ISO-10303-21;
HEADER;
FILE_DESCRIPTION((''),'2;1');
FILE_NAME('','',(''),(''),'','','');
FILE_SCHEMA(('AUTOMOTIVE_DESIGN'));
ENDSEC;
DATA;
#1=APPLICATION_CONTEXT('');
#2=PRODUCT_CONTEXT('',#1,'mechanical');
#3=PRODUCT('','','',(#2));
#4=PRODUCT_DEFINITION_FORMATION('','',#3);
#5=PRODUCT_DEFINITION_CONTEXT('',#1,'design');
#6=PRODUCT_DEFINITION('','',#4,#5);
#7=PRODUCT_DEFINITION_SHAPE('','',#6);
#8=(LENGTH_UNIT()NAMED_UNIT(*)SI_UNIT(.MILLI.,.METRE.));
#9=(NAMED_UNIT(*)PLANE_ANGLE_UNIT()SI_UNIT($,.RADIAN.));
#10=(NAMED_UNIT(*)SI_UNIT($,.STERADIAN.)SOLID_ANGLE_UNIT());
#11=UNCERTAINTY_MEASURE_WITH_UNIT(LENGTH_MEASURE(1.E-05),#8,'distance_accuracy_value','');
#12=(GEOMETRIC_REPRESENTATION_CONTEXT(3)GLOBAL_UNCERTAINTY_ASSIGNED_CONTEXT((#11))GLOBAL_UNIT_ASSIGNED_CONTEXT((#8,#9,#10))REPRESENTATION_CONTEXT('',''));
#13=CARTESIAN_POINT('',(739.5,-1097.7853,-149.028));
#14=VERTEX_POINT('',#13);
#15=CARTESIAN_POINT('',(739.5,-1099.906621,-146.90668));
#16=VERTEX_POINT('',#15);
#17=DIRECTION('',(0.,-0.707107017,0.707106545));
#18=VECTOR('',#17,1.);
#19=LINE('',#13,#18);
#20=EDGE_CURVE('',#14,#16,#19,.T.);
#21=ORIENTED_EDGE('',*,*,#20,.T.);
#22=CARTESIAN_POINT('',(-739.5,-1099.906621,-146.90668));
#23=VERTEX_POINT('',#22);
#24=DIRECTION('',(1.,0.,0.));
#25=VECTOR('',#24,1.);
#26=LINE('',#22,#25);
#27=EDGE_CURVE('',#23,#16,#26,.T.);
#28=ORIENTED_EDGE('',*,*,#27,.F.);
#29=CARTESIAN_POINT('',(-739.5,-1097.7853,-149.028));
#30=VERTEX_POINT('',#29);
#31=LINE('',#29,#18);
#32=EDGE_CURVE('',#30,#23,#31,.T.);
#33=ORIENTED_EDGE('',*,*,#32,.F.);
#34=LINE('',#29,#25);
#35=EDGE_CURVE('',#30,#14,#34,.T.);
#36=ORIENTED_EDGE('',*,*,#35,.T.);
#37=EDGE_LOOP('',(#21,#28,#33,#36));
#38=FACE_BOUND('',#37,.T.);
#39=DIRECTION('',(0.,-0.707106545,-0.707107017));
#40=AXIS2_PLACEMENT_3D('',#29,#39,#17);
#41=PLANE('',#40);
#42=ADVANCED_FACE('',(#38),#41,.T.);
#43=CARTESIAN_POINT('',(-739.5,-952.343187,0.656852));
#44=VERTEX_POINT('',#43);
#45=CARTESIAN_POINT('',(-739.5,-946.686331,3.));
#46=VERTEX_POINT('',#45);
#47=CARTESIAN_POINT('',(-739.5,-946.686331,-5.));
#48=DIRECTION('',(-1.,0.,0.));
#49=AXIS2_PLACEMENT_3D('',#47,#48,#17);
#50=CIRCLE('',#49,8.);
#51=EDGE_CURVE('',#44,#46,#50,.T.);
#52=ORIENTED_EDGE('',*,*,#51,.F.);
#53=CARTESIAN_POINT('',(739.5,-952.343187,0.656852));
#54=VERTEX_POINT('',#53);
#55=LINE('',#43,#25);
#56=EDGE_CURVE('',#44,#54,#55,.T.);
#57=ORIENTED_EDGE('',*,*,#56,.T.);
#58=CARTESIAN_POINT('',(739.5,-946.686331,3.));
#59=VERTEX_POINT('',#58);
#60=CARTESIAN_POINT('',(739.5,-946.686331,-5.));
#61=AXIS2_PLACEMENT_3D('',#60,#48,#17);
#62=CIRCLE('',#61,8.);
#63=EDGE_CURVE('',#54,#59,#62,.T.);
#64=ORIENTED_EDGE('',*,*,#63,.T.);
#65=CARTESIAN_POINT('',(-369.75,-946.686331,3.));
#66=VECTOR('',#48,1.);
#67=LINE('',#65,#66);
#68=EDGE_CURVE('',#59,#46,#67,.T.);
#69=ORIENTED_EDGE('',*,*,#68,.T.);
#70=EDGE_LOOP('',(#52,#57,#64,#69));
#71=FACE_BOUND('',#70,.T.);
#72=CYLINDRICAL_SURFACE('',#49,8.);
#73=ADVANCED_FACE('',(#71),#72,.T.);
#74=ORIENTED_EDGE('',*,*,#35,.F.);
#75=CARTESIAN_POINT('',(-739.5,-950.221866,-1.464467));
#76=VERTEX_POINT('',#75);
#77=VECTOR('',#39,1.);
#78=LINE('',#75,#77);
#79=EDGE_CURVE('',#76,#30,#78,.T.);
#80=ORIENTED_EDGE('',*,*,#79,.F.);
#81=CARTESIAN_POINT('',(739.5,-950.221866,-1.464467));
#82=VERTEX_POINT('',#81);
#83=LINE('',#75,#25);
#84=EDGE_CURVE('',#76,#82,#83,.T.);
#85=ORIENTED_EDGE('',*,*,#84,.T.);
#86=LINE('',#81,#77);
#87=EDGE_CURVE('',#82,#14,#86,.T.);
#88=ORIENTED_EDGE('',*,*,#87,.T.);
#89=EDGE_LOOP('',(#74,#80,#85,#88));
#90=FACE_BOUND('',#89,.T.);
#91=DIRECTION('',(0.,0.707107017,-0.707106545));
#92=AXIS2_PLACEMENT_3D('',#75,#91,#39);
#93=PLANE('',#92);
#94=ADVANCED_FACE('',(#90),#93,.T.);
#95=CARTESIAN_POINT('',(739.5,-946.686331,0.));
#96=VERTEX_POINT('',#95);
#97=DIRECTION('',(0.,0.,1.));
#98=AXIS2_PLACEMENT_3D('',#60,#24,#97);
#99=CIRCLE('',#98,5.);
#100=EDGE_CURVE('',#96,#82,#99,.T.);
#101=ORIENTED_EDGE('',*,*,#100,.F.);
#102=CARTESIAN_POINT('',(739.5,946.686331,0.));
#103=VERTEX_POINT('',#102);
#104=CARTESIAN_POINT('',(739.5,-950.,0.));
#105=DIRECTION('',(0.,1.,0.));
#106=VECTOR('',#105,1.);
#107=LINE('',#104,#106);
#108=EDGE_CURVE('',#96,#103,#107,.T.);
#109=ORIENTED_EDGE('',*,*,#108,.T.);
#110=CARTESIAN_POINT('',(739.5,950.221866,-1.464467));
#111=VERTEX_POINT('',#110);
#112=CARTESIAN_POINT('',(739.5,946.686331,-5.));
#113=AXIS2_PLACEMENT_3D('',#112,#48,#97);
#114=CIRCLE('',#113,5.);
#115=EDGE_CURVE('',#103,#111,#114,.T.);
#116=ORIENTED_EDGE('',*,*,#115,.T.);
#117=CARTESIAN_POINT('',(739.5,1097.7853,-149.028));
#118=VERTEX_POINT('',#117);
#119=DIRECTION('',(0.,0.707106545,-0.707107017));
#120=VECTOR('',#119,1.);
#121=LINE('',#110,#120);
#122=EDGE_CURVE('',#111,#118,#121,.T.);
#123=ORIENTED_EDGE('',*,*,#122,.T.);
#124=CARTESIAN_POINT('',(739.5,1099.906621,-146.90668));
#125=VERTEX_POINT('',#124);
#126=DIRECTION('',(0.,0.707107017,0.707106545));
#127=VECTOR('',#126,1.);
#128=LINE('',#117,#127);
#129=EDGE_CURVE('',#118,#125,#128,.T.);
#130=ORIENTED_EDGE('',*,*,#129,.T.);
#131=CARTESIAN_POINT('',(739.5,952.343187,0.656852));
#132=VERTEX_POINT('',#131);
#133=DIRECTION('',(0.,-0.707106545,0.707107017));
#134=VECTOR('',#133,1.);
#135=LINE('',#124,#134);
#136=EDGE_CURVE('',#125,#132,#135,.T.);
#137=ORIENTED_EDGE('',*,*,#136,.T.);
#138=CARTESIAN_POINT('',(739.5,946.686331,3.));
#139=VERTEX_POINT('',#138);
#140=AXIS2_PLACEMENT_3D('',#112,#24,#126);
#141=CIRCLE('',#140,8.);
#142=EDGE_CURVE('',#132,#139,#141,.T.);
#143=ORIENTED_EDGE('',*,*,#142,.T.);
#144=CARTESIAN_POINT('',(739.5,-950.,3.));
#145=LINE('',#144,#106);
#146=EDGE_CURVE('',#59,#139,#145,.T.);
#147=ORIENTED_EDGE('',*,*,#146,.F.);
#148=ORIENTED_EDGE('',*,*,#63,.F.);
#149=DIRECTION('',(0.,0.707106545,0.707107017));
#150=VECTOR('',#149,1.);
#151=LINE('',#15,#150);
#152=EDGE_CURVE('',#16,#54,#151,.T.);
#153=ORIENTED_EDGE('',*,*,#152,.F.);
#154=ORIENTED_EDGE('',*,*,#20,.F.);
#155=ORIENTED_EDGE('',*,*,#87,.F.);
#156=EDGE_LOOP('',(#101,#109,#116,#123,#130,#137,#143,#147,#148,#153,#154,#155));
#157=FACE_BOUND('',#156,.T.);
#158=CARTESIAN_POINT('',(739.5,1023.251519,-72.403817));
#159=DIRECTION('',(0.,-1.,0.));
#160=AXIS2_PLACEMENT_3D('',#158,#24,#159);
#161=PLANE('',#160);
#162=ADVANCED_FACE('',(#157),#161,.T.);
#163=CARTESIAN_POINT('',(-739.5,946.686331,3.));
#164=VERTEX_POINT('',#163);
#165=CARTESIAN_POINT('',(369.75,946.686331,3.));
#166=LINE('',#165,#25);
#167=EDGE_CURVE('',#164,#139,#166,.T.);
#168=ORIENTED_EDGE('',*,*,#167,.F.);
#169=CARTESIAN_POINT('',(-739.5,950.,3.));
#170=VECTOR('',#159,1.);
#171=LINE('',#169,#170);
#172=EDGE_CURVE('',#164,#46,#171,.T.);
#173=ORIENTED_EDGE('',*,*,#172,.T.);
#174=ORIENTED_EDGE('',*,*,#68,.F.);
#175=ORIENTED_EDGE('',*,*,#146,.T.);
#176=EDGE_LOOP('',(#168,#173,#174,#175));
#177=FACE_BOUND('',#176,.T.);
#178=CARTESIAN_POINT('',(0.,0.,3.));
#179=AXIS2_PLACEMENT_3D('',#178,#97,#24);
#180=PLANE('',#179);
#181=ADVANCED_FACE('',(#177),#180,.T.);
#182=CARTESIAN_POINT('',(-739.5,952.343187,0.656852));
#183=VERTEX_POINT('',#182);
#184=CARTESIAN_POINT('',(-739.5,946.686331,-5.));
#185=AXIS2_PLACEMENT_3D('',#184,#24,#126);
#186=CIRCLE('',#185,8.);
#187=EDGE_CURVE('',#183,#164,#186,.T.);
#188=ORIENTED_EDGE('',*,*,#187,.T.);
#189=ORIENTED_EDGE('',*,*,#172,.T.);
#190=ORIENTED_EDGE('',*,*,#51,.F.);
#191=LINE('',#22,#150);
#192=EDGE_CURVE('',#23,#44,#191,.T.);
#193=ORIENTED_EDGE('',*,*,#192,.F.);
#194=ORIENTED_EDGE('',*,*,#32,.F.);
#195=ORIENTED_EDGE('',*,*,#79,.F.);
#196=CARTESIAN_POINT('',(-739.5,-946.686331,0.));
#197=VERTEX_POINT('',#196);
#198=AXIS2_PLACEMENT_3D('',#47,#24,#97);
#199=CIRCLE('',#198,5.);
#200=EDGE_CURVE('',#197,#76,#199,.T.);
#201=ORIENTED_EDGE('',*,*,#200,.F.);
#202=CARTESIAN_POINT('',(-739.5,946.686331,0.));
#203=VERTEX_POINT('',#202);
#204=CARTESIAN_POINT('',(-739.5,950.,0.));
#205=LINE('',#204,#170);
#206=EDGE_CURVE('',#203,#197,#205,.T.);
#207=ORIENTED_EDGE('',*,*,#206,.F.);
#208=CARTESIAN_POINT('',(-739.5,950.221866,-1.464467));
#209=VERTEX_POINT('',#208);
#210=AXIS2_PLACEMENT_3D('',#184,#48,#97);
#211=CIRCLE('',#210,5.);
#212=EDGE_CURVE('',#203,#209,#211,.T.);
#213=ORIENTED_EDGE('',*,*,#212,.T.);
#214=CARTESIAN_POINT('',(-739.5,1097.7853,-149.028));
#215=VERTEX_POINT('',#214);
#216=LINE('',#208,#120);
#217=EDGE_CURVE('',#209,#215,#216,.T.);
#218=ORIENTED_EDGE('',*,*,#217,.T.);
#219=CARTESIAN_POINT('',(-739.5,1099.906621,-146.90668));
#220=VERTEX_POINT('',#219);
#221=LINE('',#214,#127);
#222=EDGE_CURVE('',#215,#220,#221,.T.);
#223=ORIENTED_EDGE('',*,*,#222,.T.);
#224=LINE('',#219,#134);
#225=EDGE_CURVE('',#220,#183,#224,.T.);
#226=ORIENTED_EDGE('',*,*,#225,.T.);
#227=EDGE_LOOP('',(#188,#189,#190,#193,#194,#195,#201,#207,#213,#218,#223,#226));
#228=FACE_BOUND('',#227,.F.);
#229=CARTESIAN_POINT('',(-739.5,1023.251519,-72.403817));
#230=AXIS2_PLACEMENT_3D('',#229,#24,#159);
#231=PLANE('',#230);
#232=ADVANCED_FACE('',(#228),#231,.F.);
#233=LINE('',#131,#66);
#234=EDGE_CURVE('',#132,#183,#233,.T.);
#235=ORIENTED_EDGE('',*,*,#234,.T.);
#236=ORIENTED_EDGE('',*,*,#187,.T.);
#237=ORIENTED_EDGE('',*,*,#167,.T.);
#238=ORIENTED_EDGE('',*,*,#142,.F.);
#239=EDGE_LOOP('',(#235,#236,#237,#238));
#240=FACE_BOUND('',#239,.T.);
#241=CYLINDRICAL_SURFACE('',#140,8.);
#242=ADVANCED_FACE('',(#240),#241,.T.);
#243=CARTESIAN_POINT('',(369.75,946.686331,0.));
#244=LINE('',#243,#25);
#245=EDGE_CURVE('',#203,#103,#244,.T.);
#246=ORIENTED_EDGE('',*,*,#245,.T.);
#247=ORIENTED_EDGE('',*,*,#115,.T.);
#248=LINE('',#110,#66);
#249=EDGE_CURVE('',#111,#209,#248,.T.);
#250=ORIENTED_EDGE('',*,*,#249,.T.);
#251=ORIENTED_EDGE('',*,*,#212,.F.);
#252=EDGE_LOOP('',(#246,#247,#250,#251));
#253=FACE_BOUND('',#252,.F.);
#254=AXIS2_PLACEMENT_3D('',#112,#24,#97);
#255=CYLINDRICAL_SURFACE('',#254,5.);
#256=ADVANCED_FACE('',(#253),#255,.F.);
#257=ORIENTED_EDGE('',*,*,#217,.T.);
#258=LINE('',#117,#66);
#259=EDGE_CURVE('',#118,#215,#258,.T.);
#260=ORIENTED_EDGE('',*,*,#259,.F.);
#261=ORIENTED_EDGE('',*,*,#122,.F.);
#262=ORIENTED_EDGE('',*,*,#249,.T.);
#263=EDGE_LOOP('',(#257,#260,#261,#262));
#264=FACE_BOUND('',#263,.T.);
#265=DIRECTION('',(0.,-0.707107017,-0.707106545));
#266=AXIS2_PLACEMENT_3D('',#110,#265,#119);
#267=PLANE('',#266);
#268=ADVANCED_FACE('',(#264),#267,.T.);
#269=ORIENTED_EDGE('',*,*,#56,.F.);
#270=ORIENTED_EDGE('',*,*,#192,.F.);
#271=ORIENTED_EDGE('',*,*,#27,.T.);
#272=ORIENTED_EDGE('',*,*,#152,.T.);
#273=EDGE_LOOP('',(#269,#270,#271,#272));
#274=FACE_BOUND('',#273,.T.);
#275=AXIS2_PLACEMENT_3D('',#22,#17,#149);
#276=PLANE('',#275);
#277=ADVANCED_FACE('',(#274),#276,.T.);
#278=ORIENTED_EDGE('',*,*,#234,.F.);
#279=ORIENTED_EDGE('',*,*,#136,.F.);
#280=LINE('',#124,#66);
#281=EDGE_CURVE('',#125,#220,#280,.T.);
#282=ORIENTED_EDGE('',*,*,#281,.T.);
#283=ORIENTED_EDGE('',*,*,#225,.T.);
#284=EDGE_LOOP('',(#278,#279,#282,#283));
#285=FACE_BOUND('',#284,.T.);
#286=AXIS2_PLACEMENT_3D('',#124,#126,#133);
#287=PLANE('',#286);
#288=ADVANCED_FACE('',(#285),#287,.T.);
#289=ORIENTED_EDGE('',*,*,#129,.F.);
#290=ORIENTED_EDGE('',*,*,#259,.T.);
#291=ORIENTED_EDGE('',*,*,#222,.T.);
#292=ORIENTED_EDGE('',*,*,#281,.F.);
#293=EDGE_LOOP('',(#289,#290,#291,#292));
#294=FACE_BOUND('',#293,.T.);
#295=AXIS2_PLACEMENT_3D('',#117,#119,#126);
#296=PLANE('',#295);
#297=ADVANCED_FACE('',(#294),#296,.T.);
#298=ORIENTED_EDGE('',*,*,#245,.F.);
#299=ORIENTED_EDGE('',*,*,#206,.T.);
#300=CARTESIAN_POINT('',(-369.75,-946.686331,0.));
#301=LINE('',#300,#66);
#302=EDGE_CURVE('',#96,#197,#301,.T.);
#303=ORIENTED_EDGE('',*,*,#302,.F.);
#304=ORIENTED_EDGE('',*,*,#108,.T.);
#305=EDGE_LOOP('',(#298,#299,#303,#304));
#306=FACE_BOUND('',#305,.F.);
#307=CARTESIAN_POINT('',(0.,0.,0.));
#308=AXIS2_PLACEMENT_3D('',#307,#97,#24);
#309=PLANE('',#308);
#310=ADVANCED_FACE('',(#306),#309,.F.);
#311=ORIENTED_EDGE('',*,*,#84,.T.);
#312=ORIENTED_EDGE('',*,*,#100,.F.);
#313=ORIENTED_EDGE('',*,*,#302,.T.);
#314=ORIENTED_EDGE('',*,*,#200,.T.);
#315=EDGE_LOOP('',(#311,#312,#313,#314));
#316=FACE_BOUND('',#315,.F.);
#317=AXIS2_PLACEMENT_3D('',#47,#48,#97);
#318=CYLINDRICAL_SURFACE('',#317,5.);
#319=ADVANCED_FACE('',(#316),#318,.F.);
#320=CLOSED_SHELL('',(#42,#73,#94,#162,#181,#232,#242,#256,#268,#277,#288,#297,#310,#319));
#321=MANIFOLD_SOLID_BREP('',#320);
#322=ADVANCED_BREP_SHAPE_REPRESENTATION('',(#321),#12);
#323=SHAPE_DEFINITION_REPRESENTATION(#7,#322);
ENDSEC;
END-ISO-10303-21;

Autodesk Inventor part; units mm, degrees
ref_plane "YZ Plane" through (0, 0, 0) normal (1, 0, 0) x (0, 1, 0)
ref_plane "XZ Plane" through (0, 0, 0) normal (0, 1, 0) x (-1, 0, 0)
ref_plane "XY Plane" through (0, 0, 0) normal (0, 0, 1) x (1, 0, 0)
sketch "Sketch1" plane through (0, 0, 0) normal (0, 0, 1) x (1, 0, 0)
  line L0 (-739.5, -950) -> (739.5, -950)
  line L1 (739.5, -950) -> (739.5, 950)
  line L2 (739.5, 950) -> (-739.5, 950)
  line L3 (-739.5, 950) -> (-739.5, -950)
  line L4 (-739.5, -950) -> (739.5, 950) construction
  line L5 (739.5, -950) -> (-739.5, 950) construction
  point P0 (0, 0)
  dimension "d0" = 1479
  dimension "d1" = 1900
extrude "Plate1" add sketch "Sketch1" along normal blind 3
sketch "Sketch2" plane through (739.5, 947.8787, 0.8787) normal (0, 0.7071068, 0.7071068) x (-1, 0, 0)
  line L0 (1479, 0) -> (0, 0)
  line L1 (0, 0) -> (0, -212)
  line L2 (0, -212) -> (1479, -212)
  line L3 (1479, -212) -> (1479, 0)
edge flange "Flange1" height 212 angle 45 thickness 3 bend radius 5 thickness toward (0, 0.7071068, 0.7071068) relief round relief width 3 relief depth 1.5 corner gap 5 corner form 0 edges at (0, 950, 0) (0, -950, 0) wall of the first edge with corners at (-739.5, 947.8787, 0.8787) (739.5, 947.8787, 0.8787) (739.5, 1097.7853, -149.028) (-739.5, 1097.7853, -149.028)
bend "Bend1"
corner "Corner1"
sketch "Sketch4" plane through (739.5, 1097.7853, -149.028) normal (0, -0.7071068, -0.7071068) x (-1, 0, 0)
  line L0 (25, -40) -> (25, -25) construction
  line L1 (25, -25) -> (225, -25) construction
  line L2 (225, -25) -> (225, -40) construction
  line L3 (225, -40) -> (25, -40) construction
  line L4 (1479, 0) -> (0, 0) projected
  line L5 (0, -208.6863) -> (0, 0) projected
  point P0 (739.5, -881.6301)
  dimension "d13" = 200
  dimension "d14" = 15
  dimension "d15" = 25
  dimension "d16" = 25
mark "Mark1"
equation "\"d2\" = Thickness"
equation "\"d3\" = BendReliefWidth"
equation "\"d4\" = BendReliefDepth"
equation "\"d5\" = MinimumRemnant"
equation "\"d6\" = TransitionRadius"
equation "\"d9\" = BendRadius"
equation "\"d10\" = CornerReliefSize"
equation "\"d11\" = GapSize"
equation "\"d12\" = JacobiRadiusSize"
equation "\"BendReliefWidth\" = Thickness"
equation "\"BendReliefDepth\" = 0.5 * Thickness"
equation "\"CornerReliefSize\" = 4 * Thickness"
equation "\"MinimumRemnant\" = 2 * Thickness"
equation "\"TransitionRadius\" = BendRadius"
equation "\"JacobiRadiusSize\" = BendRadius"
equation "\"GapSize\" = Thickness"
equation "\"Thickness\" = 3"
equation "\"BendRadius\" = 5"
properties part number "BSH 011 floor" material "09g2s"
